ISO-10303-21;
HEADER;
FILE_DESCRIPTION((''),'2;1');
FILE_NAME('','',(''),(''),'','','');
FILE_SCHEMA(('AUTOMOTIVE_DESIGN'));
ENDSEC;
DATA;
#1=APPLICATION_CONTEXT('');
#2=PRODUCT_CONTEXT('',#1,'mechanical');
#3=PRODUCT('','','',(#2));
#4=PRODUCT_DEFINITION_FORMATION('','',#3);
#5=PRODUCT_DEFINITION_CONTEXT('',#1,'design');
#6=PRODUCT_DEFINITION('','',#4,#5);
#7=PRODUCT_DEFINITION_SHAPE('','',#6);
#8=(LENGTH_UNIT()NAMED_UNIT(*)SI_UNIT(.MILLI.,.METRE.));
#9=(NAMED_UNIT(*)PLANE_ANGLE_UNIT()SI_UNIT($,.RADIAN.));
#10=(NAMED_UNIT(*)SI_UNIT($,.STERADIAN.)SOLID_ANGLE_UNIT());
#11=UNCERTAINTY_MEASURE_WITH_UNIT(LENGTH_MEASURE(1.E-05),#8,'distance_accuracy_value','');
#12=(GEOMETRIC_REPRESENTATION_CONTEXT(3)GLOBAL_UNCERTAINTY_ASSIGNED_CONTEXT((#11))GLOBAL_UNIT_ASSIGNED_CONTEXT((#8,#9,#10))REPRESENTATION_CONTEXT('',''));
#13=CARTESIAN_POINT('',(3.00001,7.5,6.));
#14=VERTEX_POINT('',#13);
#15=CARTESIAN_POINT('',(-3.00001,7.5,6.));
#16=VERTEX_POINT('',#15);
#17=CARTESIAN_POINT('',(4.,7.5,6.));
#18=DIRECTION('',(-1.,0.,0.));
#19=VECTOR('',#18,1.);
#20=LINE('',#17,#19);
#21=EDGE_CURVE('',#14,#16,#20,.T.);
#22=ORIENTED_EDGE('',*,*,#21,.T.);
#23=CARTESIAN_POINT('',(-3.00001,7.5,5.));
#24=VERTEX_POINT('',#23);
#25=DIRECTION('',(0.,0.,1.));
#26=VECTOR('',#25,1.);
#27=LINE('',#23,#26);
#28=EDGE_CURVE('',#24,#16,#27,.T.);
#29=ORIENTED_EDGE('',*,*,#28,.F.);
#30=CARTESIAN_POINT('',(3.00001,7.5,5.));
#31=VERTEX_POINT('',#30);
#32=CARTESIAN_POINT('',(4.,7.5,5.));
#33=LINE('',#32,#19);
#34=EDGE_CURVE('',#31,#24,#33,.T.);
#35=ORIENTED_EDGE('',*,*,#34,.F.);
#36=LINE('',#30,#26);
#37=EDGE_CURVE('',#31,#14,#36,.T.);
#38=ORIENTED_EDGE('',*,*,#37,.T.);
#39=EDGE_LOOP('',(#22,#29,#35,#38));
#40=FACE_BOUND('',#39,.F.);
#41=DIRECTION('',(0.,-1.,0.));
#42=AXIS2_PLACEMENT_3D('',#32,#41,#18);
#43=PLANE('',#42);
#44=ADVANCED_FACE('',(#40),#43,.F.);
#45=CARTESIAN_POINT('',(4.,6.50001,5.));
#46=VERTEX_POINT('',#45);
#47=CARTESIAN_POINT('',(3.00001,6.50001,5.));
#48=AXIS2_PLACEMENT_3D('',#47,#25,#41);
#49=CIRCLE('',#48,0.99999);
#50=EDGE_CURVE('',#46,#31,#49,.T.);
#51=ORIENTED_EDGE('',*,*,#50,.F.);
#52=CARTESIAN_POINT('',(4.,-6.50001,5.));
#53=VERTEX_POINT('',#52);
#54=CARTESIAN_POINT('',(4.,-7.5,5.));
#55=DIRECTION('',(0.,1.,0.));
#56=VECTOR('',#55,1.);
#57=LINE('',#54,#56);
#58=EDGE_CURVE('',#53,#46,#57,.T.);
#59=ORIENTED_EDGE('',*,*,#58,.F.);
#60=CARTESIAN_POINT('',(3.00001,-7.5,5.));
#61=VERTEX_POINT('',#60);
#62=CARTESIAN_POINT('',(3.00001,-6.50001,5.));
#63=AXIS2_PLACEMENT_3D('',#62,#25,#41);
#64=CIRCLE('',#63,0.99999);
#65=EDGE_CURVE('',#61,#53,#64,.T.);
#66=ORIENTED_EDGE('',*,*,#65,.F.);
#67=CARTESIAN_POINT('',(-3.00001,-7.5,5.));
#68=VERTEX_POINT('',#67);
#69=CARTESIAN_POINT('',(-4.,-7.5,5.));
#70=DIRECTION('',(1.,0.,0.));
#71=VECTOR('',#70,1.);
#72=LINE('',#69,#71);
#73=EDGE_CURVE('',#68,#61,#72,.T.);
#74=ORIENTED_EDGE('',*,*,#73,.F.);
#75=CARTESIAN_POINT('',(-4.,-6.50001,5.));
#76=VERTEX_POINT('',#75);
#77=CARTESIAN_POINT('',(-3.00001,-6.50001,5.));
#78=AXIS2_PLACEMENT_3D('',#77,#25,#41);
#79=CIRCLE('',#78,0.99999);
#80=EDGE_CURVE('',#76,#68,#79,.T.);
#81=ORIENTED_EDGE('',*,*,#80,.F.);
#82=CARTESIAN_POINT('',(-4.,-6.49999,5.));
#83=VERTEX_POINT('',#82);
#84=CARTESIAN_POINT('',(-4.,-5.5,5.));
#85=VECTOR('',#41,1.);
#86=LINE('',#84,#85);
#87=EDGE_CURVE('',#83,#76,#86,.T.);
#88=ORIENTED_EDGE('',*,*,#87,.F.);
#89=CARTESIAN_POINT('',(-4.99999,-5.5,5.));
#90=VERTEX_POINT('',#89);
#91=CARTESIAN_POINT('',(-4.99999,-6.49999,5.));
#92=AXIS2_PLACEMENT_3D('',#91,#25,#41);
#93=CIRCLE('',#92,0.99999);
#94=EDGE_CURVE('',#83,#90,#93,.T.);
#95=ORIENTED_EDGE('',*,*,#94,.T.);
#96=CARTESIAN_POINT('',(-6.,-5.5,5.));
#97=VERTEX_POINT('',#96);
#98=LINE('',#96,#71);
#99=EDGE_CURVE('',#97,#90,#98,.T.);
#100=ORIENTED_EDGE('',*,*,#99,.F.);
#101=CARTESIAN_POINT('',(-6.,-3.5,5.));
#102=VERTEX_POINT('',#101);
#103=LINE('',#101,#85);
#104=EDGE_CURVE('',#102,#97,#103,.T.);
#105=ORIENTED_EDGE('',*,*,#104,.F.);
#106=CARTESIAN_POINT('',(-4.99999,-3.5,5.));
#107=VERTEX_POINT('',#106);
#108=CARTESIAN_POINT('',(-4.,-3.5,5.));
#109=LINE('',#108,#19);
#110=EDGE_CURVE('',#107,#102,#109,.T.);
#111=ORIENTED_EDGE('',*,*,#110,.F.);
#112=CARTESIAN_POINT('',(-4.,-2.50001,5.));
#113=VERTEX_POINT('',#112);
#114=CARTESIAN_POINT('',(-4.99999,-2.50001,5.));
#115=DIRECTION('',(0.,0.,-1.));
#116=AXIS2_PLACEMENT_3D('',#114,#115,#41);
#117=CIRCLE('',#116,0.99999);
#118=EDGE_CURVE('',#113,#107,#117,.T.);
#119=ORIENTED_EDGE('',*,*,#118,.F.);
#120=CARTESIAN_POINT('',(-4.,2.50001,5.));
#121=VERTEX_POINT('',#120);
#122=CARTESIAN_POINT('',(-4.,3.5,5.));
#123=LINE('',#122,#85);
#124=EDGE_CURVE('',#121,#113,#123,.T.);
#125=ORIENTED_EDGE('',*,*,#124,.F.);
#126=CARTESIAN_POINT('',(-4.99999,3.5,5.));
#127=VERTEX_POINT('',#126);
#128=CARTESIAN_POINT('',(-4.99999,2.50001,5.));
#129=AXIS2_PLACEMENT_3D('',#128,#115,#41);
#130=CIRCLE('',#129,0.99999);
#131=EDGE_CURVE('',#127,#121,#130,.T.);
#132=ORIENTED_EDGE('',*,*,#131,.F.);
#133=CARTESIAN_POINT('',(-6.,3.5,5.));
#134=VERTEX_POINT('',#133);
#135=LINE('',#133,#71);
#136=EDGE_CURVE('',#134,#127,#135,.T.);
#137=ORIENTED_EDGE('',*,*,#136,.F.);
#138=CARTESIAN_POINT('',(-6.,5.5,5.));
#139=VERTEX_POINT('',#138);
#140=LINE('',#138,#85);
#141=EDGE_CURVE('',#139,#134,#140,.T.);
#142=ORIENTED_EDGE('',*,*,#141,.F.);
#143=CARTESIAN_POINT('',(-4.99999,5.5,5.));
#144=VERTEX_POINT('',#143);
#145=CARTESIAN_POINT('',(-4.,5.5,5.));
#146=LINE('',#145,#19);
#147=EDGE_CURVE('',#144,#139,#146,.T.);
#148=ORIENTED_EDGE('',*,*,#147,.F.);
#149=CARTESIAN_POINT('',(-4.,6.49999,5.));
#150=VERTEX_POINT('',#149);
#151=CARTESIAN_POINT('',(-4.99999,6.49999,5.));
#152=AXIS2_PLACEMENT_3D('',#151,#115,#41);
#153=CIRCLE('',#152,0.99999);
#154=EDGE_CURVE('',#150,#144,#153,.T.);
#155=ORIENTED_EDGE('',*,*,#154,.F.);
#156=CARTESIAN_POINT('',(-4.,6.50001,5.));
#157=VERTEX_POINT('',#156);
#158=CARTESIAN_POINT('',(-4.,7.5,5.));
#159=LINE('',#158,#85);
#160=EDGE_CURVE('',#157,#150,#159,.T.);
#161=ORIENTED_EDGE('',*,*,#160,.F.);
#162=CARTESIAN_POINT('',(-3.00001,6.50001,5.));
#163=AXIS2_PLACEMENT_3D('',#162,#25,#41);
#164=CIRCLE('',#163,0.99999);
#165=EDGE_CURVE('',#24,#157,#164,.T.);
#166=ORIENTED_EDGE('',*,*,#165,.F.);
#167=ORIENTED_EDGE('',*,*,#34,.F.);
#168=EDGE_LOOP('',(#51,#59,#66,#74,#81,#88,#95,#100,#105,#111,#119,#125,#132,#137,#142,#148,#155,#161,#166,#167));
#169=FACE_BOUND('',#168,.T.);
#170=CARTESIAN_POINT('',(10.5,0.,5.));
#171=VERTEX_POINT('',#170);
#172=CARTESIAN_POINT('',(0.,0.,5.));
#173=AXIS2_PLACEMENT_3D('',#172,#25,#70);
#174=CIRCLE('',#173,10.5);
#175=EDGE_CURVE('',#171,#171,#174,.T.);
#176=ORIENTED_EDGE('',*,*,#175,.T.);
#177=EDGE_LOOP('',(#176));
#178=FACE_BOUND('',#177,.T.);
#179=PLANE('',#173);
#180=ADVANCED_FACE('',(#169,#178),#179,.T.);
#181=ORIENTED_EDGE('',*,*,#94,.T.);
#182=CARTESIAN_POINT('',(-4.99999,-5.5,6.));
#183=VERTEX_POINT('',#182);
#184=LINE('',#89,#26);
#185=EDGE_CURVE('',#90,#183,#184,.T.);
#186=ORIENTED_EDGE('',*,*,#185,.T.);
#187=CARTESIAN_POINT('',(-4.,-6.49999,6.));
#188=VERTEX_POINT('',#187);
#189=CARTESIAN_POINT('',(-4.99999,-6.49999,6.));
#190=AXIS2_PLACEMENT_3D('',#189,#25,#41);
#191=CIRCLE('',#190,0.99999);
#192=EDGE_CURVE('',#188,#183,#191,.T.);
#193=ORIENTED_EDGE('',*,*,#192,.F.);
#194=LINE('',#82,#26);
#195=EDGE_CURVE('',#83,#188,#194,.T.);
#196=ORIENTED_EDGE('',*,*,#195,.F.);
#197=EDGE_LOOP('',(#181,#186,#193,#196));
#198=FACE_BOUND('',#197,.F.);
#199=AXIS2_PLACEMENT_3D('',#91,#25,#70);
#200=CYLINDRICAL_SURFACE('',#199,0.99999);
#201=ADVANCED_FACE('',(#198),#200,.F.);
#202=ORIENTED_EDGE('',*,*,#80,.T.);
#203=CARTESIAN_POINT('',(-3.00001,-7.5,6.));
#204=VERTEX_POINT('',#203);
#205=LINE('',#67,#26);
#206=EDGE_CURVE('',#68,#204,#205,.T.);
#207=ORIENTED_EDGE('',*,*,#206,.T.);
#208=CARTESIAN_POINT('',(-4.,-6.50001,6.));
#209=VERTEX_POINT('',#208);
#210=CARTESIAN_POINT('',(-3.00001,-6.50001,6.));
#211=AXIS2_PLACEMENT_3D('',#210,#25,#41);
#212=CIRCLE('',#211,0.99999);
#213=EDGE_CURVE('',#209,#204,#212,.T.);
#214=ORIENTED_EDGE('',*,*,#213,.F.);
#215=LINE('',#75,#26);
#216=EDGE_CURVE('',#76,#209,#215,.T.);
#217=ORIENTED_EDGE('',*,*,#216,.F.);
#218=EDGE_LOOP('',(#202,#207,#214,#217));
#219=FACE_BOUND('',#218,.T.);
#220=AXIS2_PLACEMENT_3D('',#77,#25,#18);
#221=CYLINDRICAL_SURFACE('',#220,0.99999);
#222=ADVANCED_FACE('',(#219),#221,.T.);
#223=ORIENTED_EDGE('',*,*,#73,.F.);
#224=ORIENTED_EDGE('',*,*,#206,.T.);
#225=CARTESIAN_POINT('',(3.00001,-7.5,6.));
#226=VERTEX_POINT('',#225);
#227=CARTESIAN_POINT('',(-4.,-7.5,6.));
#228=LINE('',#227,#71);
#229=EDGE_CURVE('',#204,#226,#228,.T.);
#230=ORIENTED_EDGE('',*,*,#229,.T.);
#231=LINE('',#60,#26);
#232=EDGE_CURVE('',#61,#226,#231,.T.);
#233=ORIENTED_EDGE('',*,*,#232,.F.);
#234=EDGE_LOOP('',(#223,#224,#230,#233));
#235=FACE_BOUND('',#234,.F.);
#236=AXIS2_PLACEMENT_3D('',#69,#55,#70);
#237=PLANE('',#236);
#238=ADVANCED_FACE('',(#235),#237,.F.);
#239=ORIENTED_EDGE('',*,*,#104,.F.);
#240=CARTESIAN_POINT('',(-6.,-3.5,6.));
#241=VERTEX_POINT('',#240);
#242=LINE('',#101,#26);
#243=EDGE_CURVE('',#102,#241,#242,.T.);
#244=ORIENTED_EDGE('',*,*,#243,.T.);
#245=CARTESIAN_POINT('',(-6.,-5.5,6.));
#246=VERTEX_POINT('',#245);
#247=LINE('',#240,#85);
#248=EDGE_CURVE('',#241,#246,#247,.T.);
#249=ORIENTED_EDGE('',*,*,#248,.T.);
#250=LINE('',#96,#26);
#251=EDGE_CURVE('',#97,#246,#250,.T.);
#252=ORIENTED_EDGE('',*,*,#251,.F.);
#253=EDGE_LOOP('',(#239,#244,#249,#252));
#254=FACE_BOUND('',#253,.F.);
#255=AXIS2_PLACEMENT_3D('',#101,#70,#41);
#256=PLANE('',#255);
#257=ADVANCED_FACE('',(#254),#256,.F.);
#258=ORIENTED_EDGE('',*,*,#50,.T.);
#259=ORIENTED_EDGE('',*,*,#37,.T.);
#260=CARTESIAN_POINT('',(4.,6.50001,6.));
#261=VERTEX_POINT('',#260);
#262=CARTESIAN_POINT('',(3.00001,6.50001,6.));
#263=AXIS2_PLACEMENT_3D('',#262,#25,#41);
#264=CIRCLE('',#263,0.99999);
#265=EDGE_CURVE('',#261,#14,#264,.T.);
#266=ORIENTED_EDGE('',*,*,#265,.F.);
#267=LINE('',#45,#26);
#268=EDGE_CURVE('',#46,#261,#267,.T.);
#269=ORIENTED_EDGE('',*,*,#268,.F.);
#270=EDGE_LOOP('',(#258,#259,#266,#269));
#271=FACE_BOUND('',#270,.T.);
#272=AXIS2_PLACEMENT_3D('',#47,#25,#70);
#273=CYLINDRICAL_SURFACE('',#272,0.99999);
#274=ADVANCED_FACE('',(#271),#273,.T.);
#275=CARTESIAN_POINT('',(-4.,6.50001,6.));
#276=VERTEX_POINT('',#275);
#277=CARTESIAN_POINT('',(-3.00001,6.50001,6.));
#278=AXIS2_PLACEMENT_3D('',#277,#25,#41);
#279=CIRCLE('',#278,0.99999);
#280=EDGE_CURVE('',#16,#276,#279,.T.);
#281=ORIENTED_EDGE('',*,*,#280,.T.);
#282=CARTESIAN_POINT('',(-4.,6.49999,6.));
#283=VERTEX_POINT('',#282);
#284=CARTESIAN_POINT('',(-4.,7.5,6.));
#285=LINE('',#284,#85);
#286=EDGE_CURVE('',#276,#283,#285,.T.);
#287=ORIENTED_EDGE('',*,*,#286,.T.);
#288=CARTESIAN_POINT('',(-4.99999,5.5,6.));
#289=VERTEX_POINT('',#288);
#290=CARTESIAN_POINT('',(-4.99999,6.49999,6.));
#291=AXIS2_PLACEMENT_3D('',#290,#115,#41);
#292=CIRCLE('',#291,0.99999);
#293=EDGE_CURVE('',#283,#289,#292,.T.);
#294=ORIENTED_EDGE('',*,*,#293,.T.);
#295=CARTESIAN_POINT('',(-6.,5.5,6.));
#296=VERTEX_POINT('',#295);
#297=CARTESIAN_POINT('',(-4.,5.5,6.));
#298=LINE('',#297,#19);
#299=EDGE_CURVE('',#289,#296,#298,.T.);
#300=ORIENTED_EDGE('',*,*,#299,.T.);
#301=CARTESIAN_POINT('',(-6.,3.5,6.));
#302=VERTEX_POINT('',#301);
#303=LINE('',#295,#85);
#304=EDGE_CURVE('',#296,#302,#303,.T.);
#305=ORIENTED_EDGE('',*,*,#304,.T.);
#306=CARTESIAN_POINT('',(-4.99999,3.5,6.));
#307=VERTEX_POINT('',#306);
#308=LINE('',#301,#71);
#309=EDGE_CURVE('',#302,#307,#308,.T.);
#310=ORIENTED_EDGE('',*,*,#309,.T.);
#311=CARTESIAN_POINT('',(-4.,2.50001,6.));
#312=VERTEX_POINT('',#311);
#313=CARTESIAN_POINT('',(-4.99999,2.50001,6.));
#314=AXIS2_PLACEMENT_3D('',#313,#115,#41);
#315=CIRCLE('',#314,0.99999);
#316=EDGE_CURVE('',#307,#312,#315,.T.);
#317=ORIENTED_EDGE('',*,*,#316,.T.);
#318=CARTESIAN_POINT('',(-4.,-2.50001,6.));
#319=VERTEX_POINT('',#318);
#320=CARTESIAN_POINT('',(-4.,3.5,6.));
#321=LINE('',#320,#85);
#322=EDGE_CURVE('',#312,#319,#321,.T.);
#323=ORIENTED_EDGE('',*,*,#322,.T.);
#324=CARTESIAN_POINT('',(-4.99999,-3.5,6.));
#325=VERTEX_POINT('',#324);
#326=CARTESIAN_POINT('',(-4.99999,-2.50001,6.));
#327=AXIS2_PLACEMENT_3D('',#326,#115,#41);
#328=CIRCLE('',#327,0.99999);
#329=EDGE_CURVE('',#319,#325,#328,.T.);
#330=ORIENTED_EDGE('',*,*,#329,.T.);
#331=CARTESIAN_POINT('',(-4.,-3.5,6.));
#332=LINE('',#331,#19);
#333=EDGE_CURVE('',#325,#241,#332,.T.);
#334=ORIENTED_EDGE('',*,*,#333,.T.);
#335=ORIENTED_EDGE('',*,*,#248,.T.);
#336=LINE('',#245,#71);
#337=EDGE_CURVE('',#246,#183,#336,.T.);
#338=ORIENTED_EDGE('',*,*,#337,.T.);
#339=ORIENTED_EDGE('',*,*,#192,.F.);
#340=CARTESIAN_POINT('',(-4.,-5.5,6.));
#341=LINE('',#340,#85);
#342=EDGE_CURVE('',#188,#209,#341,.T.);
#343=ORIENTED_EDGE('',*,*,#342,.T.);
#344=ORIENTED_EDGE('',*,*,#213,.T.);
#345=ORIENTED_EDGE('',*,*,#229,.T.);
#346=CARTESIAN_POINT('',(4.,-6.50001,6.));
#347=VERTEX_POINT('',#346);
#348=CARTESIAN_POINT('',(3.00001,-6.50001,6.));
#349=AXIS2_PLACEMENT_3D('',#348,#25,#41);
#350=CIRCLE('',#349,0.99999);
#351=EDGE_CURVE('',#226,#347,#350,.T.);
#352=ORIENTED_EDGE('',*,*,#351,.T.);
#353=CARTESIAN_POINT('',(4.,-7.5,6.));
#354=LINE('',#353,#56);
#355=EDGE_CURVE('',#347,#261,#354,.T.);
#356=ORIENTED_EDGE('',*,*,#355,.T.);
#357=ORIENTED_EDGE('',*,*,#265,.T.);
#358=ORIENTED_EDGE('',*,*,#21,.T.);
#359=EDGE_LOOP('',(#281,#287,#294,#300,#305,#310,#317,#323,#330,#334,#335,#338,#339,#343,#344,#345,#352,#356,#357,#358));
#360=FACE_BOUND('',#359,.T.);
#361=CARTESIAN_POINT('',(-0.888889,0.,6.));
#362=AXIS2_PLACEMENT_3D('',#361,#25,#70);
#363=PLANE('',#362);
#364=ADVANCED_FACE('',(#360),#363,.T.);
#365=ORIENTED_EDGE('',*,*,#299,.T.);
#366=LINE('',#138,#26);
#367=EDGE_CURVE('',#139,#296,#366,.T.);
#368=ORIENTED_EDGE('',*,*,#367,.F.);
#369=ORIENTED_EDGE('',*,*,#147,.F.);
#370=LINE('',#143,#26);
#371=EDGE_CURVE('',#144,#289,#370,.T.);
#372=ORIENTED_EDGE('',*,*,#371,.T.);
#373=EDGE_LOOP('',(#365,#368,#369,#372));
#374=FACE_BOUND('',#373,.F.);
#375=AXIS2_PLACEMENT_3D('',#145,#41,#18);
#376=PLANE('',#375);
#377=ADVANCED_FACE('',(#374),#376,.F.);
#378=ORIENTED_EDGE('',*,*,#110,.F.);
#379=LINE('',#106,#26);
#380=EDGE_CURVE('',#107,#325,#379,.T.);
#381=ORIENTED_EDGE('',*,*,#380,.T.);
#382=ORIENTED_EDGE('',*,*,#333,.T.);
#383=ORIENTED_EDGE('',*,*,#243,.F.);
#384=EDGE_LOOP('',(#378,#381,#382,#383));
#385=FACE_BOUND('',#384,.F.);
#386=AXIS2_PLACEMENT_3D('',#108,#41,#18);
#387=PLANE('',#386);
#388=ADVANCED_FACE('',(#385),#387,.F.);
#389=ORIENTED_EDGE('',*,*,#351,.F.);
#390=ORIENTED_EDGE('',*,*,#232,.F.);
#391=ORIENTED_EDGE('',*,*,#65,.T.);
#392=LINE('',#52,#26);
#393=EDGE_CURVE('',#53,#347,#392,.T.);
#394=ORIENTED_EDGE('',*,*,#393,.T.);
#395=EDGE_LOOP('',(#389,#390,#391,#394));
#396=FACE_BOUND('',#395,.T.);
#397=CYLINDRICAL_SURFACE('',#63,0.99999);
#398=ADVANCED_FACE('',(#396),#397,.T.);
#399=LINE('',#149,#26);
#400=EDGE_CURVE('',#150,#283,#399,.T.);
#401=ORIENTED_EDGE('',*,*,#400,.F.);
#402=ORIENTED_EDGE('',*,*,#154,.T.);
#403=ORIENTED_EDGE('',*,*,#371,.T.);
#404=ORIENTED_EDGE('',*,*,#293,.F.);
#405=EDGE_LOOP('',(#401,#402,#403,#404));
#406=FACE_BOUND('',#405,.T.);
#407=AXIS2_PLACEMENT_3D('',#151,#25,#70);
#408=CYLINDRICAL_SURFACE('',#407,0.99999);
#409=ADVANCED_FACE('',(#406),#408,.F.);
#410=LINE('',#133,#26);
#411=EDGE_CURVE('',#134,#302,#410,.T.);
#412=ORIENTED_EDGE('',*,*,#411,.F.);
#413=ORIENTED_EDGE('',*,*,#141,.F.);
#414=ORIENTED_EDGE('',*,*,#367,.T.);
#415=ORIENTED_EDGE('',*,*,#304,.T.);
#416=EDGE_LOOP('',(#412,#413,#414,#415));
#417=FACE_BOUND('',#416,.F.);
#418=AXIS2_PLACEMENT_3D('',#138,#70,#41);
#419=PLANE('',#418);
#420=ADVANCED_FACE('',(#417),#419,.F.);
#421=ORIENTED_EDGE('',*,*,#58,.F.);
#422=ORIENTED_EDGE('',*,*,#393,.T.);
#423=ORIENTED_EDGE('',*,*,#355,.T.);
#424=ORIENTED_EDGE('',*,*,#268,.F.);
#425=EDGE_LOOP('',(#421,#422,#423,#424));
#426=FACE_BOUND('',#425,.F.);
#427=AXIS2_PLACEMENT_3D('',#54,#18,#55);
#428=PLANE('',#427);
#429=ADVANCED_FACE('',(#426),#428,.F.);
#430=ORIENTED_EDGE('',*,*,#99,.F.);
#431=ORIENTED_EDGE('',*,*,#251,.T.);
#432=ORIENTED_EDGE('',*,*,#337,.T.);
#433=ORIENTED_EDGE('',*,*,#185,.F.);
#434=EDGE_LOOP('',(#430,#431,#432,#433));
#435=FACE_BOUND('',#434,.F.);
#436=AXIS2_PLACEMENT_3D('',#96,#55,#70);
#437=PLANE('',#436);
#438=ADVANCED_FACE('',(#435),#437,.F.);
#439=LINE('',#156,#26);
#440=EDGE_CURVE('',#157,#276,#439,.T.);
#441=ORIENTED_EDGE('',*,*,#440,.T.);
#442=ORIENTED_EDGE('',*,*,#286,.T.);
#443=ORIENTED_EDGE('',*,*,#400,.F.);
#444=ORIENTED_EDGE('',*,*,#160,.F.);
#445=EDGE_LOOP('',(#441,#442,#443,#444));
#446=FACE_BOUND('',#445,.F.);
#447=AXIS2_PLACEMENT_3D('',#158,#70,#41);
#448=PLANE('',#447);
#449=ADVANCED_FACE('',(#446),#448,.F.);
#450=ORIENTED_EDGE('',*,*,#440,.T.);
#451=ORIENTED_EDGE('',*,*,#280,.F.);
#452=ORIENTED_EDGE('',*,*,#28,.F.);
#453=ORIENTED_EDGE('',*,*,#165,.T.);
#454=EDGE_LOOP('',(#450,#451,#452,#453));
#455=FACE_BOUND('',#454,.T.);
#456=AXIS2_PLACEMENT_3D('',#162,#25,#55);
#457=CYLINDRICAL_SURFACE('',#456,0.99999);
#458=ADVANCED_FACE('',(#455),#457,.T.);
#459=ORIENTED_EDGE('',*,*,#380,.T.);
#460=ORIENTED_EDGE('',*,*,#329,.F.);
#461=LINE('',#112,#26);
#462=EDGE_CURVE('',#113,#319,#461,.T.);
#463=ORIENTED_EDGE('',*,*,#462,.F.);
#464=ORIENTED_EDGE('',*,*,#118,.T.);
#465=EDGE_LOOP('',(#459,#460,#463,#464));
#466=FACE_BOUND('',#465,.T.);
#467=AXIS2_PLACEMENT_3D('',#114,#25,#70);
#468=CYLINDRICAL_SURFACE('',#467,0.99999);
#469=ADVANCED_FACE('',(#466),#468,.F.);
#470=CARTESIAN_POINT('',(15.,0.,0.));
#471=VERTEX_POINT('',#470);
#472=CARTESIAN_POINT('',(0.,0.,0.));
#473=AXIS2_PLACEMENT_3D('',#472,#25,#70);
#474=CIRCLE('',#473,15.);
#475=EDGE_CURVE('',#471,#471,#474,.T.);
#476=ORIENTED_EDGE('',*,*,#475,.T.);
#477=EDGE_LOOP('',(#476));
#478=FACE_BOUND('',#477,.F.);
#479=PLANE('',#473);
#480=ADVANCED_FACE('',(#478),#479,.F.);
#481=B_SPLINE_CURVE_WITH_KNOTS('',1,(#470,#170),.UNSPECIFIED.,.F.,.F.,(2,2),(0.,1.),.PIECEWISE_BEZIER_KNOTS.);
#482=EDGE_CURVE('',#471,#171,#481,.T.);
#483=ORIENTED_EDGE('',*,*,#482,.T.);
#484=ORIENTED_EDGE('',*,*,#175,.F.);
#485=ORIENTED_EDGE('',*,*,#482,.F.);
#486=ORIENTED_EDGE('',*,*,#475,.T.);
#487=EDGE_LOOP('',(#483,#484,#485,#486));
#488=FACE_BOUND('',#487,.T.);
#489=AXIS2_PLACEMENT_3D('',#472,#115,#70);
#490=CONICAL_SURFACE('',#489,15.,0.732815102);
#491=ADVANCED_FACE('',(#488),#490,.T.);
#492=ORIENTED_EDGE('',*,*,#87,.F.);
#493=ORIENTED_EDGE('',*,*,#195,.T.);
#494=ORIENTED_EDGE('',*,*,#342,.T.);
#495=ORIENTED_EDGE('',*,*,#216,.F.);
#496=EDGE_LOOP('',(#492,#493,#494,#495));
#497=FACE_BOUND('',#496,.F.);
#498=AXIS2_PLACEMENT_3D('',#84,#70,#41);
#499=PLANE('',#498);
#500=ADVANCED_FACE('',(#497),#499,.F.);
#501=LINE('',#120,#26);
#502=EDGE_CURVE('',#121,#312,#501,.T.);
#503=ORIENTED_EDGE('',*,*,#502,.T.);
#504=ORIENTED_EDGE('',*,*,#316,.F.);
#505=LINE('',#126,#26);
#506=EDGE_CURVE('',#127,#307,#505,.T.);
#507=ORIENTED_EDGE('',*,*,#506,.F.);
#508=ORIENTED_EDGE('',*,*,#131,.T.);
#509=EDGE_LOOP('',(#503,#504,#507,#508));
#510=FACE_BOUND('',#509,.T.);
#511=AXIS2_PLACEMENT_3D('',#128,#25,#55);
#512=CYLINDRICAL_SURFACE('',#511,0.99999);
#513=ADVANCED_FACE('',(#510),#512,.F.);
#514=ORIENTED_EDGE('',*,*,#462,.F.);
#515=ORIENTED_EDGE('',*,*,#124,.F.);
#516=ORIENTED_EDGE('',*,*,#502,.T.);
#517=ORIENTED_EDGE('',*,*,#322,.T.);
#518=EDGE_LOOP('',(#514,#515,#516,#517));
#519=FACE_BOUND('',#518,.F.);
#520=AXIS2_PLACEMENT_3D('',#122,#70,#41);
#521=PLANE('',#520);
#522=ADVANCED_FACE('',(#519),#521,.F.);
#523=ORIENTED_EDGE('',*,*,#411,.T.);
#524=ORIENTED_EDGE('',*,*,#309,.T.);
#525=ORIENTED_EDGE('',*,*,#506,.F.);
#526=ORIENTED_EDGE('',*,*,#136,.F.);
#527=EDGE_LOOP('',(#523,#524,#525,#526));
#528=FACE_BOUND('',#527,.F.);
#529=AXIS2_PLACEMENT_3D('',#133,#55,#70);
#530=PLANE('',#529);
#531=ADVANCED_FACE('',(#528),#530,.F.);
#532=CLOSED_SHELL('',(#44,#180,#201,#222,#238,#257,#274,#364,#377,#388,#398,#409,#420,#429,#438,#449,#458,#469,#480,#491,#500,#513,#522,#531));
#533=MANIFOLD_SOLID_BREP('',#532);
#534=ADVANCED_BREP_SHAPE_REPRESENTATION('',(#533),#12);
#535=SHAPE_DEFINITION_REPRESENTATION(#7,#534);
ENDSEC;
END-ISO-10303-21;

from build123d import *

# Parameters (mm, degrees)
F0_R     = 15
F2_R     = 10.5
F5_DEPTH = 1
F6_R     = 0.99999


# Not quite as in the source:
# - a fillet or chamfer is up to 0.001 mm smaller than in the source, because OpenCascade refuses the exact size


with BuildPart() as f3:
    # F0 (on Top) → F3 section 0
    with BuildSketch(Plane.XY):
        Circle(F0_R)
    # F2 (on offset) → F3 section 1
    with BuildSketch(Plane.XY.offset(5)):
        Circle(F2_R)
    loft()

    # F4 (on face) → F5 (join)
    with BuildSketch(Plane.XY.offset(5)):
        Polygon((-4, -5.5), (-4, -7.5), (4, -7.5), (4, 7.5), (-4, 7.5), (-4, 5.5), (-6, 5.5), (-6, 3.5), (-4, 3.5), (-4, -3.5), (-6, -3.5), (-6, -5.5), align=None)
    extrude(amount=F5_DEPTH)

    # F6 (radius 1 in the source; OpenCascade refuses exactly that, so slightly less here)
    f6_edges = [f3.edges().sort_by_distance(p)[0] for p in [
        (-4, -7.5, 5.5),
        (4, -7.5, 5.5),
        (4, 7.5, 5.5),
        (-4, 7.5, 5.5),
        (-4, -5.5, 5.5),
        (-4, 3.5, 5.5),
        (-4, -3.5, 5.5),
        (-4, 5.5, 5.5),
    ]]
    fillet(f6_edges, radius=F6_R)


solid = f3.part
